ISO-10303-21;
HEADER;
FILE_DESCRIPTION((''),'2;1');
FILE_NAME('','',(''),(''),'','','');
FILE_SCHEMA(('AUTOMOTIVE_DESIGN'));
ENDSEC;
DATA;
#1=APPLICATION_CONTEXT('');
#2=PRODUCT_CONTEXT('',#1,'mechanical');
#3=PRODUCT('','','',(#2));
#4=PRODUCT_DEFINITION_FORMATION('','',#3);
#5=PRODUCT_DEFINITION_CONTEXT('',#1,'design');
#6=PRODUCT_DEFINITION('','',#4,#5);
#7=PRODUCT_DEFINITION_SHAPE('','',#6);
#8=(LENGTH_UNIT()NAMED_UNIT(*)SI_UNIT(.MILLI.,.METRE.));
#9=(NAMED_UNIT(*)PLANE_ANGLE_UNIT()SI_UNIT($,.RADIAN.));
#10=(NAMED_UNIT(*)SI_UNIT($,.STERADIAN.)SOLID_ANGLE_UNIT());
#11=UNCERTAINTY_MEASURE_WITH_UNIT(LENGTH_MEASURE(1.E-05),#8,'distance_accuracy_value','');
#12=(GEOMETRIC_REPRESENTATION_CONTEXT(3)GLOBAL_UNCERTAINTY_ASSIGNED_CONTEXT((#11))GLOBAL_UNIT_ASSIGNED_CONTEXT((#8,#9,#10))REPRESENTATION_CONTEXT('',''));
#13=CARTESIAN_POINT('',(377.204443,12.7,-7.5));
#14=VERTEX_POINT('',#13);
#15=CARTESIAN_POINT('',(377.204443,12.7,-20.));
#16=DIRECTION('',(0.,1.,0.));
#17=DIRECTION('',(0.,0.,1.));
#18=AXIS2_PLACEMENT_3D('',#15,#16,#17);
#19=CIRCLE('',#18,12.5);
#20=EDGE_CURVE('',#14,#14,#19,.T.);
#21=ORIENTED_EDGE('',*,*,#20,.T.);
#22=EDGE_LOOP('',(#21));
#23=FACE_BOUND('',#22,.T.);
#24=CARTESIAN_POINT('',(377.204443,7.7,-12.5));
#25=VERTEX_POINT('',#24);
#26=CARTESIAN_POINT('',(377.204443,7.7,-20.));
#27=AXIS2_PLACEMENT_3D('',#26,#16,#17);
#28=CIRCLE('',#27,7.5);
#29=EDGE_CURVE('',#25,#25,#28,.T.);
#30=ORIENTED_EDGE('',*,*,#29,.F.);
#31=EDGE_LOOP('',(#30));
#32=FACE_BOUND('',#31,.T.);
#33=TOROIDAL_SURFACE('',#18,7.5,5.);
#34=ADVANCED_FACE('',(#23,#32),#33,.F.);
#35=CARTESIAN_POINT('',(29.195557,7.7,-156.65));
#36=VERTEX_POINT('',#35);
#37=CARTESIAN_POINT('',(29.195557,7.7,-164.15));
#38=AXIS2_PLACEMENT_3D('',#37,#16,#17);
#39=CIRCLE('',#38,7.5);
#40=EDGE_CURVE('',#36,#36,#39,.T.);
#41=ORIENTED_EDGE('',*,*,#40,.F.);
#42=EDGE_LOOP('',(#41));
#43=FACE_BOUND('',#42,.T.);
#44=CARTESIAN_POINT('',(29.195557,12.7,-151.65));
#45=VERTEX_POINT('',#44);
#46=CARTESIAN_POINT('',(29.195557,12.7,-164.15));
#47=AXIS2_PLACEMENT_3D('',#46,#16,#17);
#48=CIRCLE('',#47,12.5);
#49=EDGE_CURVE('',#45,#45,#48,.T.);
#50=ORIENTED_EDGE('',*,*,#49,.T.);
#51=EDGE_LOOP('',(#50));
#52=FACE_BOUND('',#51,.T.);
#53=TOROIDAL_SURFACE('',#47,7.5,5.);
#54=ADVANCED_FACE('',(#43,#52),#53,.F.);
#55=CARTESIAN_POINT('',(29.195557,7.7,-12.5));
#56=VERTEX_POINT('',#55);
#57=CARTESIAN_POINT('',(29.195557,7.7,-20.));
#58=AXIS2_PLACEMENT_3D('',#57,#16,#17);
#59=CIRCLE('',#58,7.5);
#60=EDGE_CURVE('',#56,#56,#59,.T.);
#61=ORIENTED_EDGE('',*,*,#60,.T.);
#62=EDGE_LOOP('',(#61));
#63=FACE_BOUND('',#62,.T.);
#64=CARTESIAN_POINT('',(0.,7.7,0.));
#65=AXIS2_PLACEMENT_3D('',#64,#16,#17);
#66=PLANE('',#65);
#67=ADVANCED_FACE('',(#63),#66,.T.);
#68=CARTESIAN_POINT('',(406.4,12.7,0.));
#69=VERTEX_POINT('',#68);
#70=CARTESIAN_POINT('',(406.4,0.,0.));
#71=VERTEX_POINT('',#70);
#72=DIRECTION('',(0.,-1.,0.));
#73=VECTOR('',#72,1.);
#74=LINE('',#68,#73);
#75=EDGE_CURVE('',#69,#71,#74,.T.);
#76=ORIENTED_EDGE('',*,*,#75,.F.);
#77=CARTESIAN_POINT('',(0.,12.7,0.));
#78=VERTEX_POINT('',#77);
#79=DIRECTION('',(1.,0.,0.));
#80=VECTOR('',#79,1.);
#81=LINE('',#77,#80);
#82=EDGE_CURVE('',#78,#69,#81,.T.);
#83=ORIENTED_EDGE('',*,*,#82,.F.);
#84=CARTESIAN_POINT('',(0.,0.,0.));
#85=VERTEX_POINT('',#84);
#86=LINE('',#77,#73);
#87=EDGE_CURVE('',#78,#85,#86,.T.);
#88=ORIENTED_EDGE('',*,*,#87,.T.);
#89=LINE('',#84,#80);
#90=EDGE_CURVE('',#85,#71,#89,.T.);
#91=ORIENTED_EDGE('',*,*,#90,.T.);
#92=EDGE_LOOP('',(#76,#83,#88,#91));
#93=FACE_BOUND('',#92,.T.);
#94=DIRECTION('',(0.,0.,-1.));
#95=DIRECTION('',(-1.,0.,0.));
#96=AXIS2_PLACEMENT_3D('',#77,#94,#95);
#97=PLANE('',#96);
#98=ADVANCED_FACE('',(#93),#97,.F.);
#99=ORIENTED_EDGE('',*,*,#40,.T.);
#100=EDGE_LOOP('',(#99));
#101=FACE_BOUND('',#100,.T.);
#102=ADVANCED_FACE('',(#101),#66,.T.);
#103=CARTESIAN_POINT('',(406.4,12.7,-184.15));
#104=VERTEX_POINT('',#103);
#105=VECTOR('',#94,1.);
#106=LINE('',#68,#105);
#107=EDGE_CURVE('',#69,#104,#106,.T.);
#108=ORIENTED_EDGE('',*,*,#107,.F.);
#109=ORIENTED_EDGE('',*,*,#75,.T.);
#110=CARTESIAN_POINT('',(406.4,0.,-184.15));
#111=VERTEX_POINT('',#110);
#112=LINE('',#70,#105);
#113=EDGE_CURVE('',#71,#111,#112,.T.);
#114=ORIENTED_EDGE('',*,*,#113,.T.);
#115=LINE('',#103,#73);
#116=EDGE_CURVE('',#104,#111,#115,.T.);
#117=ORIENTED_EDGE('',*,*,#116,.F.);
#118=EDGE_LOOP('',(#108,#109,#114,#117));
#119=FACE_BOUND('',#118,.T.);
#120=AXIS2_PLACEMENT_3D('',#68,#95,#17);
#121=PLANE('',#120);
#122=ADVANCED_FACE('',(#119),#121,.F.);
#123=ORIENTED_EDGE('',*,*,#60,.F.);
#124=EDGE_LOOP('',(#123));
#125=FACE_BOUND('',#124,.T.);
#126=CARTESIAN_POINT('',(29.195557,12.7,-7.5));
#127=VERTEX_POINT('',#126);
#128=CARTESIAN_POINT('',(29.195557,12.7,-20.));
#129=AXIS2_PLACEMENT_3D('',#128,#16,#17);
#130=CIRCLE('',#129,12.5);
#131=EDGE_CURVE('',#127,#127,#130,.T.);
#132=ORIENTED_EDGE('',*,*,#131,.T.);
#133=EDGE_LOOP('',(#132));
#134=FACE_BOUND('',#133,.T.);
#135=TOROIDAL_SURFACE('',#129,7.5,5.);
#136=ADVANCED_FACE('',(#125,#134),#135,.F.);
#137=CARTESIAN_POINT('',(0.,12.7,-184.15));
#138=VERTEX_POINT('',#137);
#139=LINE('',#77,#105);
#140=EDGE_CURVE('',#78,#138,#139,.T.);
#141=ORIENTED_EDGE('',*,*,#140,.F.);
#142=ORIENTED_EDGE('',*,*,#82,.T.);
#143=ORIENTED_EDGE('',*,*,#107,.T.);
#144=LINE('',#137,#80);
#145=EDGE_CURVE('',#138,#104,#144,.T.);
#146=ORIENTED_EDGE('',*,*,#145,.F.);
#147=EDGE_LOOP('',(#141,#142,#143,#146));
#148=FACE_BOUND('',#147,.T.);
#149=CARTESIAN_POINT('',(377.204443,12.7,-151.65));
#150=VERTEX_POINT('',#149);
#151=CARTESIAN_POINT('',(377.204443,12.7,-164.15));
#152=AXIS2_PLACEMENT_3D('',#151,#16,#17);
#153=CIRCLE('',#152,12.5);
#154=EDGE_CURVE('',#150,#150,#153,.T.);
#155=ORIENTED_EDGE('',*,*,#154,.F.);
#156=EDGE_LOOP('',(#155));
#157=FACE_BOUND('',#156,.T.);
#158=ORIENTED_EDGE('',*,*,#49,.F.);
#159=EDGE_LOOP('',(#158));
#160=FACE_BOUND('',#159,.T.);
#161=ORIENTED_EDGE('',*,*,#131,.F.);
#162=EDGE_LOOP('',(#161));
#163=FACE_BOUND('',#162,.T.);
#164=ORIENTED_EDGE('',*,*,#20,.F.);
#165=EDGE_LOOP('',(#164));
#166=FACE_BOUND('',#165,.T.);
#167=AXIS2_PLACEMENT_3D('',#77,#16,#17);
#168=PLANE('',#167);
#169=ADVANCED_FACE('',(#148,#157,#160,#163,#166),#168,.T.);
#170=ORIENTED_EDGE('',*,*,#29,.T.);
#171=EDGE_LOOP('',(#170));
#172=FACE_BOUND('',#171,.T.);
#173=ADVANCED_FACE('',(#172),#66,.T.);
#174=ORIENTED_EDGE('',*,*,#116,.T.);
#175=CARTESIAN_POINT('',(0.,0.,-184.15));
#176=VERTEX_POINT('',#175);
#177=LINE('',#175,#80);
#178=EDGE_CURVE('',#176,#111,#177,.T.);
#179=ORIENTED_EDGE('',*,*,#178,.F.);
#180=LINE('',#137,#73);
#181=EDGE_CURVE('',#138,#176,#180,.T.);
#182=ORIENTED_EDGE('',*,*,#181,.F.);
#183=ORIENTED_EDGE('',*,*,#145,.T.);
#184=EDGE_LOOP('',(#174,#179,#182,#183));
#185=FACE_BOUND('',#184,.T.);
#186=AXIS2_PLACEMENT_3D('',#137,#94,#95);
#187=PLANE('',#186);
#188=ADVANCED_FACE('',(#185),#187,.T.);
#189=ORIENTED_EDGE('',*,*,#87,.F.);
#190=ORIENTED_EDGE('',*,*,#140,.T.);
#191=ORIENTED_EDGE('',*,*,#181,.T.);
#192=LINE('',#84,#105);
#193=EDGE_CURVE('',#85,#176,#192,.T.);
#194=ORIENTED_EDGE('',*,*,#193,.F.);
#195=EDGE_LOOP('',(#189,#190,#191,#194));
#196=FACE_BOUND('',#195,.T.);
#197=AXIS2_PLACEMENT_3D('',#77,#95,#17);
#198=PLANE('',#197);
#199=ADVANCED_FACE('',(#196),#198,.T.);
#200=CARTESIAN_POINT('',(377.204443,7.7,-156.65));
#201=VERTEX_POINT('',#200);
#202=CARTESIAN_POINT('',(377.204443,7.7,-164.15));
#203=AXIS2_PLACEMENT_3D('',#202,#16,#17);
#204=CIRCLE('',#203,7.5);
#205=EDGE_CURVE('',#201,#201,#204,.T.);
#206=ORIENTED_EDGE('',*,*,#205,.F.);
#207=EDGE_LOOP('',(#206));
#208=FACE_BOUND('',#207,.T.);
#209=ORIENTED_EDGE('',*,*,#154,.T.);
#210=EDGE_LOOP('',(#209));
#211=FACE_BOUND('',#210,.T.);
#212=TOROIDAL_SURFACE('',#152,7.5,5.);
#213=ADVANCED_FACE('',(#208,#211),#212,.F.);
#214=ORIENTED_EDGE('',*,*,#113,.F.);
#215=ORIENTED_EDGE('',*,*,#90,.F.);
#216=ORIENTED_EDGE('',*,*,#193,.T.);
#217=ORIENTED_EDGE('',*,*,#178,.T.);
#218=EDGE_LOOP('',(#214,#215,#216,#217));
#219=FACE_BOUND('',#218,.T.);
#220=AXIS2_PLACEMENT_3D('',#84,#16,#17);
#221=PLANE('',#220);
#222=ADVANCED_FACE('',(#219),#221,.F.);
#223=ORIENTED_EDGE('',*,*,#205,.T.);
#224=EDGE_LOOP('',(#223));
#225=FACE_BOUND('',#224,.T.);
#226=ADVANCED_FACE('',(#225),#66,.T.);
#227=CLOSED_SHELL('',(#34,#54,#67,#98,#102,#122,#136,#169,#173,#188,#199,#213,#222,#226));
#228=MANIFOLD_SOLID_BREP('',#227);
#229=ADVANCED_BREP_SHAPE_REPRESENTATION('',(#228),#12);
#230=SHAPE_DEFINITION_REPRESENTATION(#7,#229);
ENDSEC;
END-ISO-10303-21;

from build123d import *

# Parameters (mm, degrees)
SKETCH1_W           = 406.4
SKETCH1_H           = 184.15
BOSS_EXTRUDE1_DEPTH = 12.7
SKETCH2_R           = 12.5
CUT_EXTRUDE1_DEPTH  = 5
FILLET1_R           = 5


with BuildPart() as part:
    # Sketch1 → Boss-Extrude1 (new body)
    with BuildSketch(Plane(origin=(0, 0, 0), x_dir=(1, 0, 0), z_dir=(0, 1, 0))):
        with Locations((203.2, 92.075)):
            Rectangle(SKETCH1_W, SKETCH1_H)
    extrude(amount=BOSS_EXTRUDE1_DEPTH)

    # Sketch2 → Cut-Extrude1 (cut)
    with BuildSketch(Plane(origin=(0, 12.7, 0), x_dir=(1, 0, 0), z_dir=(0, 1, 0))):
        with Locations(Location((29.195557492, 20, 0), (0, 0, 270))):
            Circle(SKETCH2_R)
        with Locations(Location((377.204442508, 20, 0), (0, 0, 270))):
            Circle(SKETCH2_R)
        with Locations(Location((377.204442508, 164.15, 0), (0, 0, 270))):
            Circle(SKETCH2_R)
        with Locations(Location((29.195557492, 164.15, 0), (0, 0, 270))):
            Circle(SKETCH2_R)
    extrude(amount=-CUT_EXTRUDE1_DEPTH, mode=Mode.SUBTRACT)

    # Fillet1
    fillet1_edges = [part.edges().sort_by_distance(p)[0] for p in [
        (29.195557492, 7.7, -176.65),
        (377.204442508, 7.7, -176.65),
        (377.204442508, 7.7, -32.5),
        (29.195557492, 7.7, -32.5),
    ]]
    fillet(fillet1_edges, radius=FILLET1_R - 0.0001)  # a hair under: the kernel refuses the full size


solid = part.part
